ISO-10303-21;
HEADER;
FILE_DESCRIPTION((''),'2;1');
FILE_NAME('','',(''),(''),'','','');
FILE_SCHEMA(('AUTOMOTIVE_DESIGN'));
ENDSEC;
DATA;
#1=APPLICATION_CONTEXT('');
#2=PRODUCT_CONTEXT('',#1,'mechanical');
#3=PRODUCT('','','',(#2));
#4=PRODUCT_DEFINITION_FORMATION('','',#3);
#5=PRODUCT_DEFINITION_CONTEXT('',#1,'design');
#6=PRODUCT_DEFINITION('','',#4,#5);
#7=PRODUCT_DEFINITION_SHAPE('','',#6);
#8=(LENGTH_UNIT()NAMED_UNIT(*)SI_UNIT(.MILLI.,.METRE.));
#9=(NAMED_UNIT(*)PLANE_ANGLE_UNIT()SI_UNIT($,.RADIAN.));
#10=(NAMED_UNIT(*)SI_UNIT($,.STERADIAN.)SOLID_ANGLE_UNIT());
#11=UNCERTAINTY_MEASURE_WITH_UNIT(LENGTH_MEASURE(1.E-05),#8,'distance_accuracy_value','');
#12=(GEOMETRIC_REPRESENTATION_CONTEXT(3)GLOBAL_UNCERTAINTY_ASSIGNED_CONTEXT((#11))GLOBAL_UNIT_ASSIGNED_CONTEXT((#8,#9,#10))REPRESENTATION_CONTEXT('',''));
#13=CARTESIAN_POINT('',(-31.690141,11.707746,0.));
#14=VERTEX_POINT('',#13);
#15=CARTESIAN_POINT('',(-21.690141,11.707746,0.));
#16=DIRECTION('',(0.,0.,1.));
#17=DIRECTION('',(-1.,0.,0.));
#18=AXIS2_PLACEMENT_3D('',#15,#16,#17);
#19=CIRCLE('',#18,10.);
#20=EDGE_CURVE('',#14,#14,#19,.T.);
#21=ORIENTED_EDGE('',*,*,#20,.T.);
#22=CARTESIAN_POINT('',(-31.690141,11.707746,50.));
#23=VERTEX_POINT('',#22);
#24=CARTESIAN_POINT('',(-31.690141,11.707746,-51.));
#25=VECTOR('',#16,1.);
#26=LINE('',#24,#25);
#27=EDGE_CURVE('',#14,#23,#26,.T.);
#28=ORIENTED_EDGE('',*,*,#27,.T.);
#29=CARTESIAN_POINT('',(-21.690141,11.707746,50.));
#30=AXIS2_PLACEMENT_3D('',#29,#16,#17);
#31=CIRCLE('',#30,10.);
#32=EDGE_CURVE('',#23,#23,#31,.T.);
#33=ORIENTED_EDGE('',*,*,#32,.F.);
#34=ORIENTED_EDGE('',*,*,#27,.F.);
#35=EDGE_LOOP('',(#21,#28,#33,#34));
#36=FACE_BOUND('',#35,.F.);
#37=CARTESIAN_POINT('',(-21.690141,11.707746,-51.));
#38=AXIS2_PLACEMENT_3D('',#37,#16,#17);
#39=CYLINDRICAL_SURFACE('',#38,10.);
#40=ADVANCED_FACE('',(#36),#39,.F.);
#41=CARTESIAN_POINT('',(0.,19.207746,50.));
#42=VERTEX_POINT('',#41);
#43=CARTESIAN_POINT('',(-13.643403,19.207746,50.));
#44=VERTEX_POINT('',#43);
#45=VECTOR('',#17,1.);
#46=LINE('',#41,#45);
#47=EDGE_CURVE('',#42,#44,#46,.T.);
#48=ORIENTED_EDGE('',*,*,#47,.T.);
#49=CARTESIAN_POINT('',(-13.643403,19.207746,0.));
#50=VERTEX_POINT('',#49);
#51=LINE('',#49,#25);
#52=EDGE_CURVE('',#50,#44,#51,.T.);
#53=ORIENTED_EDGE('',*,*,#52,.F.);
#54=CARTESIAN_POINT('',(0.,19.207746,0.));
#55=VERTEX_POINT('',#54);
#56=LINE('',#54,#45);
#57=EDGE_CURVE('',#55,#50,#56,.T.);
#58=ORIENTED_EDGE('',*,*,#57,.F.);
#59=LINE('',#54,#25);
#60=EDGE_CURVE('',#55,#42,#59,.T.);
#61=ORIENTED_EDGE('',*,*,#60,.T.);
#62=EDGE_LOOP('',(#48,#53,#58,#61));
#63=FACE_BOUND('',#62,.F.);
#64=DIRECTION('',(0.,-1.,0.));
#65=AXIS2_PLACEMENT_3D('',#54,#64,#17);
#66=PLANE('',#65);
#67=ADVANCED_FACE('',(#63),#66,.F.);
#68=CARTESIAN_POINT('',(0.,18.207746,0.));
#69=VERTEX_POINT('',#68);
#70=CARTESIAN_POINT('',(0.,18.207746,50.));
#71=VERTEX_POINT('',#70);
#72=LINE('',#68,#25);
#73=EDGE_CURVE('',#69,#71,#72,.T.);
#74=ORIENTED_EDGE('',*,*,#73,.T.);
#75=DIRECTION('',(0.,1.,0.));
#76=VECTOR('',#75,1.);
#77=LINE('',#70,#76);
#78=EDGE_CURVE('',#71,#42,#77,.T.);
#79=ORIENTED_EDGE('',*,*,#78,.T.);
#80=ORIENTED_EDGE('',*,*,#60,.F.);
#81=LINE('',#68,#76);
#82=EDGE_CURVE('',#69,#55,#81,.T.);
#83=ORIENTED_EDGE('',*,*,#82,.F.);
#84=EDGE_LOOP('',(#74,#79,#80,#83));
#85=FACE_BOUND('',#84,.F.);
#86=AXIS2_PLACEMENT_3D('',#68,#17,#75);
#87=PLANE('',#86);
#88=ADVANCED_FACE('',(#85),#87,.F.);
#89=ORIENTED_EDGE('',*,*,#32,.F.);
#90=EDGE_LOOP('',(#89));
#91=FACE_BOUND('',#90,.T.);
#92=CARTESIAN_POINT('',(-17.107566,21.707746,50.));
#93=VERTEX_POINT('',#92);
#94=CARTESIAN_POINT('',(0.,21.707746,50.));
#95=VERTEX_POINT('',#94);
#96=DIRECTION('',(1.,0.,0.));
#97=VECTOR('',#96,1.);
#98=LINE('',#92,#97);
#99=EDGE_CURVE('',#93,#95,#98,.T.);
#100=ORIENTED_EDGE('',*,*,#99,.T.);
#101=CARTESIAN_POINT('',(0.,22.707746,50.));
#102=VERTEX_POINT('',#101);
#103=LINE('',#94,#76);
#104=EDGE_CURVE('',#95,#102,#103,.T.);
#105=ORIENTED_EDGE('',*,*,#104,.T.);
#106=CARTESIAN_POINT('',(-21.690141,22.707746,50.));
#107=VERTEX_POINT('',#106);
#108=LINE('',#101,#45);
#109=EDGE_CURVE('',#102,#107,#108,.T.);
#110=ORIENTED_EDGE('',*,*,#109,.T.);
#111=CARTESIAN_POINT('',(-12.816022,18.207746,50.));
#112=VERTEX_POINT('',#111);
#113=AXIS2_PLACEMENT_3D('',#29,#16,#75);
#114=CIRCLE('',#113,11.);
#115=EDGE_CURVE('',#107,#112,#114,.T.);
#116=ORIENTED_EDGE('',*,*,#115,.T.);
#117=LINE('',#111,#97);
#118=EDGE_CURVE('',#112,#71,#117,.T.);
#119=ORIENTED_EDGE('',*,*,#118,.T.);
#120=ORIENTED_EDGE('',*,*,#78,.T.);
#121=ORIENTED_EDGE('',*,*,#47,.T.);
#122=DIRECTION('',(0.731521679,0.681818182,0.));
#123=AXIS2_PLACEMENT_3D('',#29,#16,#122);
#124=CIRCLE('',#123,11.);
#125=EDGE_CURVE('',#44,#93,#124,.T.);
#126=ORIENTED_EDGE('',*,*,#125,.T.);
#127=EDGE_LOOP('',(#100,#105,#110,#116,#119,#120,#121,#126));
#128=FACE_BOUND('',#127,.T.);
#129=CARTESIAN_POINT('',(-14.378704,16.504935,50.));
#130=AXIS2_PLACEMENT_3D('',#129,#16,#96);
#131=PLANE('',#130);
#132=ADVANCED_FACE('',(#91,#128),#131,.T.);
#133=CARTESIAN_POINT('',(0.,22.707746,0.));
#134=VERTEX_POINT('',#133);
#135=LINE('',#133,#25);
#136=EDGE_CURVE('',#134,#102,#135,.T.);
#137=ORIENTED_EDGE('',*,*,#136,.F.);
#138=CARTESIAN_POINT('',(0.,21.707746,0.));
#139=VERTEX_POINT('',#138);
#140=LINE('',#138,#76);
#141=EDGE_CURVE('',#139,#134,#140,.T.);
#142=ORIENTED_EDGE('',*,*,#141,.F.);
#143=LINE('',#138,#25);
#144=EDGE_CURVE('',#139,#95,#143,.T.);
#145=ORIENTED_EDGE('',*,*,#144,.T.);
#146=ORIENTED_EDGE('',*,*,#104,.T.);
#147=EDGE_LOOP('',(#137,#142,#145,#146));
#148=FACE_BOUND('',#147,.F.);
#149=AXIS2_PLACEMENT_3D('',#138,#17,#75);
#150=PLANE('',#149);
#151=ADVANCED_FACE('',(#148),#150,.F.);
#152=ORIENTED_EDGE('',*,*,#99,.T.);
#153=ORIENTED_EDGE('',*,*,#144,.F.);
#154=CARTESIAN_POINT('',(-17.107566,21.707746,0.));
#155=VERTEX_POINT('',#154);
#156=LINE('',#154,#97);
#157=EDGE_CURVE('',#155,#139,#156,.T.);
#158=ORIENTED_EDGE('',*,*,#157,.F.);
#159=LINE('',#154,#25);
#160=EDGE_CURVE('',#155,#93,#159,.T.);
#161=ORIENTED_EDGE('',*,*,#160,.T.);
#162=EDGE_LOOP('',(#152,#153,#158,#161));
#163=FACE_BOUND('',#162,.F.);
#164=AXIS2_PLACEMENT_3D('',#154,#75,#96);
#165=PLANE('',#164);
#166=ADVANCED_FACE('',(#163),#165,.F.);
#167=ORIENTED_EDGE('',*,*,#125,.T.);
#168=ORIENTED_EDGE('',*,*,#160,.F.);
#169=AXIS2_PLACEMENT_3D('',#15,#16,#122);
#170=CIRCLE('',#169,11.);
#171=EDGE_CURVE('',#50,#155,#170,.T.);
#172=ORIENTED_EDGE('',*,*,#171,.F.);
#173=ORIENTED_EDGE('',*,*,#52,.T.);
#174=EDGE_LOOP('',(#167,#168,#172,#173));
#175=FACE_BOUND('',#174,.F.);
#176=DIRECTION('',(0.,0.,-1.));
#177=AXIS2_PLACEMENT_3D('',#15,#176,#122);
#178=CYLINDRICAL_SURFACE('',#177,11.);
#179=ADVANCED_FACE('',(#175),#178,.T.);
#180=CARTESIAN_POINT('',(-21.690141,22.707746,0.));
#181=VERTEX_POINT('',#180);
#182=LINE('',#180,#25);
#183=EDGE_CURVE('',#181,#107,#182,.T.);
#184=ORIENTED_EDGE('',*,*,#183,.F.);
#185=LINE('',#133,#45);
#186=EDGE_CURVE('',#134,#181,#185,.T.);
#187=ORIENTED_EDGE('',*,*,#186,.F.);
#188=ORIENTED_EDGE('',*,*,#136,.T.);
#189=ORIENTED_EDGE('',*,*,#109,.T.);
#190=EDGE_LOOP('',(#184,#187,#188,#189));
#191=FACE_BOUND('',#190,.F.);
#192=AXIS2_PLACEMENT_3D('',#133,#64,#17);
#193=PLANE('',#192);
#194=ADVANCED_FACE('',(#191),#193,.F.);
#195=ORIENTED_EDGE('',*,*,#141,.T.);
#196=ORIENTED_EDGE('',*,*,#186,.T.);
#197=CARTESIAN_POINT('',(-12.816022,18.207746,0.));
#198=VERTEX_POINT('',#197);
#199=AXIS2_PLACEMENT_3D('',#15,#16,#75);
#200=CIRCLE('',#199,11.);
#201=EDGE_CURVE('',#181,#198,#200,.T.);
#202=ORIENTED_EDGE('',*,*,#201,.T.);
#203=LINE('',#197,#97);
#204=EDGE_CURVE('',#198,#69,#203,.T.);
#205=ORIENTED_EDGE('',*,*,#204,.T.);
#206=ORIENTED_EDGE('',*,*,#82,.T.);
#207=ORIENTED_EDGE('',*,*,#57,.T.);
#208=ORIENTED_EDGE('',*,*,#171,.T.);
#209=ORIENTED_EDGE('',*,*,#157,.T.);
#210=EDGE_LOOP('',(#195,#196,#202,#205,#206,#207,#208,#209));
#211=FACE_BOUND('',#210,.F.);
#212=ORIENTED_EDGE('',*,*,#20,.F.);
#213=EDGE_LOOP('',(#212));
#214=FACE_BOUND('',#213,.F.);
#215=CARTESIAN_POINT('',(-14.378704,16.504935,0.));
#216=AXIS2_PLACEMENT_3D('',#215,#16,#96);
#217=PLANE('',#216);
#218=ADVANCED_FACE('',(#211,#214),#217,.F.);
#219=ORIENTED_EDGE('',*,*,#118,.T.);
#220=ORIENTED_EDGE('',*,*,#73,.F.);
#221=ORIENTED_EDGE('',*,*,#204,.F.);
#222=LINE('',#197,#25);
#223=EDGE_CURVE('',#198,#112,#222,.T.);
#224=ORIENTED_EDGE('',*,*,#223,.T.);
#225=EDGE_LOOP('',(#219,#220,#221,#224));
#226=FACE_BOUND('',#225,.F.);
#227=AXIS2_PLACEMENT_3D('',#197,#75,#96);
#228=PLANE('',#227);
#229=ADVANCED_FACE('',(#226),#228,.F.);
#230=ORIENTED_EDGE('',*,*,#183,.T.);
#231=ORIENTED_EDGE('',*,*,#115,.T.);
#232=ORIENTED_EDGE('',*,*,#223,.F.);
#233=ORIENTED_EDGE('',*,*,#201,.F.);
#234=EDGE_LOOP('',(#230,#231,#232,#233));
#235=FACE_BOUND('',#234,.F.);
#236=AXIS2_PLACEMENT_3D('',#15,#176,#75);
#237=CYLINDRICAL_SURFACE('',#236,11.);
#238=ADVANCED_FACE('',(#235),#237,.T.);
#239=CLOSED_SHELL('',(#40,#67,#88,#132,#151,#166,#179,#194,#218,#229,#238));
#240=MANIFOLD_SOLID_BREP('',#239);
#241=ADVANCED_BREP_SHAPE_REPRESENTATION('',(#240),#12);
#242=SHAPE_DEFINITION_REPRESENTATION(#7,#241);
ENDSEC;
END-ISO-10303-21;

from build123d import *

# Parameters (mm, degrees)
F0_R     = 10
F1_DEPTH = 50
F2_D     = 20
F2_DEPTH = 51
F2_TIP   = 6.0086061903


# Not quite as in the source:
# - a feature names something its author has since deleted; it is built from what else it names


with BuildPart() as f1:
    # F0 (on Top) → F1 (new body)
    with BuildSketch(Plane.XY):
        with BuildLine():
            Line((0, 19.2077464238), (-13.6434029399, 19.2077464238))
            ThreePointArc((-13.6434029399, 19.2077464238), (-15.252953043, 20.6275337493), (-17.1075657147, 21.7077464238))
            Line((-17.1075657147, 21.7077464238), (0, 21.7077464238))
            Line((0, 21.7077464238), (0, 22.7077464238))
            Line((0, 22.7077464238), (-21.6901414096, 22.7077464238))
            ThreePointArc((-21.6901414096, 22.7077464238), (-26.6650785952, 1.8970379886), (-12.816021735, 18.2077464238))
            Line((-12.816021735, 18.2077464238), (0, 18.2077464238))
            Line((0, 18.2077464238), (0, 19.2077464238))
        make_face()
        with Locations((-21.6901414096, 11.7077464238)):
            Circle(F0_R, mode=Mode.SUBTRACT)
        with Locations((-21.6901414096, 11.7077464238)):
            Circle(F0_R)
    extrude(amount=F1_DEPTH)

    # F2
    with Locations(Plane(origin=(0, 0, 0), x_dir=(1, 0, 0), z_dir=(0, 0, -1))):
        with Locations((-21.6901414096, -11.7077464238)):
            Hole(F2_D / 2, depth=F2_DEPTH)
            with Locations((0, 0, -(F2_DEPTH + F2_TIP / 2))):  # 118° drill point
                Cone(0, F2_D / 2, F2_TIP, mode=Mode.SUBTRACT)


solid = f1.part
